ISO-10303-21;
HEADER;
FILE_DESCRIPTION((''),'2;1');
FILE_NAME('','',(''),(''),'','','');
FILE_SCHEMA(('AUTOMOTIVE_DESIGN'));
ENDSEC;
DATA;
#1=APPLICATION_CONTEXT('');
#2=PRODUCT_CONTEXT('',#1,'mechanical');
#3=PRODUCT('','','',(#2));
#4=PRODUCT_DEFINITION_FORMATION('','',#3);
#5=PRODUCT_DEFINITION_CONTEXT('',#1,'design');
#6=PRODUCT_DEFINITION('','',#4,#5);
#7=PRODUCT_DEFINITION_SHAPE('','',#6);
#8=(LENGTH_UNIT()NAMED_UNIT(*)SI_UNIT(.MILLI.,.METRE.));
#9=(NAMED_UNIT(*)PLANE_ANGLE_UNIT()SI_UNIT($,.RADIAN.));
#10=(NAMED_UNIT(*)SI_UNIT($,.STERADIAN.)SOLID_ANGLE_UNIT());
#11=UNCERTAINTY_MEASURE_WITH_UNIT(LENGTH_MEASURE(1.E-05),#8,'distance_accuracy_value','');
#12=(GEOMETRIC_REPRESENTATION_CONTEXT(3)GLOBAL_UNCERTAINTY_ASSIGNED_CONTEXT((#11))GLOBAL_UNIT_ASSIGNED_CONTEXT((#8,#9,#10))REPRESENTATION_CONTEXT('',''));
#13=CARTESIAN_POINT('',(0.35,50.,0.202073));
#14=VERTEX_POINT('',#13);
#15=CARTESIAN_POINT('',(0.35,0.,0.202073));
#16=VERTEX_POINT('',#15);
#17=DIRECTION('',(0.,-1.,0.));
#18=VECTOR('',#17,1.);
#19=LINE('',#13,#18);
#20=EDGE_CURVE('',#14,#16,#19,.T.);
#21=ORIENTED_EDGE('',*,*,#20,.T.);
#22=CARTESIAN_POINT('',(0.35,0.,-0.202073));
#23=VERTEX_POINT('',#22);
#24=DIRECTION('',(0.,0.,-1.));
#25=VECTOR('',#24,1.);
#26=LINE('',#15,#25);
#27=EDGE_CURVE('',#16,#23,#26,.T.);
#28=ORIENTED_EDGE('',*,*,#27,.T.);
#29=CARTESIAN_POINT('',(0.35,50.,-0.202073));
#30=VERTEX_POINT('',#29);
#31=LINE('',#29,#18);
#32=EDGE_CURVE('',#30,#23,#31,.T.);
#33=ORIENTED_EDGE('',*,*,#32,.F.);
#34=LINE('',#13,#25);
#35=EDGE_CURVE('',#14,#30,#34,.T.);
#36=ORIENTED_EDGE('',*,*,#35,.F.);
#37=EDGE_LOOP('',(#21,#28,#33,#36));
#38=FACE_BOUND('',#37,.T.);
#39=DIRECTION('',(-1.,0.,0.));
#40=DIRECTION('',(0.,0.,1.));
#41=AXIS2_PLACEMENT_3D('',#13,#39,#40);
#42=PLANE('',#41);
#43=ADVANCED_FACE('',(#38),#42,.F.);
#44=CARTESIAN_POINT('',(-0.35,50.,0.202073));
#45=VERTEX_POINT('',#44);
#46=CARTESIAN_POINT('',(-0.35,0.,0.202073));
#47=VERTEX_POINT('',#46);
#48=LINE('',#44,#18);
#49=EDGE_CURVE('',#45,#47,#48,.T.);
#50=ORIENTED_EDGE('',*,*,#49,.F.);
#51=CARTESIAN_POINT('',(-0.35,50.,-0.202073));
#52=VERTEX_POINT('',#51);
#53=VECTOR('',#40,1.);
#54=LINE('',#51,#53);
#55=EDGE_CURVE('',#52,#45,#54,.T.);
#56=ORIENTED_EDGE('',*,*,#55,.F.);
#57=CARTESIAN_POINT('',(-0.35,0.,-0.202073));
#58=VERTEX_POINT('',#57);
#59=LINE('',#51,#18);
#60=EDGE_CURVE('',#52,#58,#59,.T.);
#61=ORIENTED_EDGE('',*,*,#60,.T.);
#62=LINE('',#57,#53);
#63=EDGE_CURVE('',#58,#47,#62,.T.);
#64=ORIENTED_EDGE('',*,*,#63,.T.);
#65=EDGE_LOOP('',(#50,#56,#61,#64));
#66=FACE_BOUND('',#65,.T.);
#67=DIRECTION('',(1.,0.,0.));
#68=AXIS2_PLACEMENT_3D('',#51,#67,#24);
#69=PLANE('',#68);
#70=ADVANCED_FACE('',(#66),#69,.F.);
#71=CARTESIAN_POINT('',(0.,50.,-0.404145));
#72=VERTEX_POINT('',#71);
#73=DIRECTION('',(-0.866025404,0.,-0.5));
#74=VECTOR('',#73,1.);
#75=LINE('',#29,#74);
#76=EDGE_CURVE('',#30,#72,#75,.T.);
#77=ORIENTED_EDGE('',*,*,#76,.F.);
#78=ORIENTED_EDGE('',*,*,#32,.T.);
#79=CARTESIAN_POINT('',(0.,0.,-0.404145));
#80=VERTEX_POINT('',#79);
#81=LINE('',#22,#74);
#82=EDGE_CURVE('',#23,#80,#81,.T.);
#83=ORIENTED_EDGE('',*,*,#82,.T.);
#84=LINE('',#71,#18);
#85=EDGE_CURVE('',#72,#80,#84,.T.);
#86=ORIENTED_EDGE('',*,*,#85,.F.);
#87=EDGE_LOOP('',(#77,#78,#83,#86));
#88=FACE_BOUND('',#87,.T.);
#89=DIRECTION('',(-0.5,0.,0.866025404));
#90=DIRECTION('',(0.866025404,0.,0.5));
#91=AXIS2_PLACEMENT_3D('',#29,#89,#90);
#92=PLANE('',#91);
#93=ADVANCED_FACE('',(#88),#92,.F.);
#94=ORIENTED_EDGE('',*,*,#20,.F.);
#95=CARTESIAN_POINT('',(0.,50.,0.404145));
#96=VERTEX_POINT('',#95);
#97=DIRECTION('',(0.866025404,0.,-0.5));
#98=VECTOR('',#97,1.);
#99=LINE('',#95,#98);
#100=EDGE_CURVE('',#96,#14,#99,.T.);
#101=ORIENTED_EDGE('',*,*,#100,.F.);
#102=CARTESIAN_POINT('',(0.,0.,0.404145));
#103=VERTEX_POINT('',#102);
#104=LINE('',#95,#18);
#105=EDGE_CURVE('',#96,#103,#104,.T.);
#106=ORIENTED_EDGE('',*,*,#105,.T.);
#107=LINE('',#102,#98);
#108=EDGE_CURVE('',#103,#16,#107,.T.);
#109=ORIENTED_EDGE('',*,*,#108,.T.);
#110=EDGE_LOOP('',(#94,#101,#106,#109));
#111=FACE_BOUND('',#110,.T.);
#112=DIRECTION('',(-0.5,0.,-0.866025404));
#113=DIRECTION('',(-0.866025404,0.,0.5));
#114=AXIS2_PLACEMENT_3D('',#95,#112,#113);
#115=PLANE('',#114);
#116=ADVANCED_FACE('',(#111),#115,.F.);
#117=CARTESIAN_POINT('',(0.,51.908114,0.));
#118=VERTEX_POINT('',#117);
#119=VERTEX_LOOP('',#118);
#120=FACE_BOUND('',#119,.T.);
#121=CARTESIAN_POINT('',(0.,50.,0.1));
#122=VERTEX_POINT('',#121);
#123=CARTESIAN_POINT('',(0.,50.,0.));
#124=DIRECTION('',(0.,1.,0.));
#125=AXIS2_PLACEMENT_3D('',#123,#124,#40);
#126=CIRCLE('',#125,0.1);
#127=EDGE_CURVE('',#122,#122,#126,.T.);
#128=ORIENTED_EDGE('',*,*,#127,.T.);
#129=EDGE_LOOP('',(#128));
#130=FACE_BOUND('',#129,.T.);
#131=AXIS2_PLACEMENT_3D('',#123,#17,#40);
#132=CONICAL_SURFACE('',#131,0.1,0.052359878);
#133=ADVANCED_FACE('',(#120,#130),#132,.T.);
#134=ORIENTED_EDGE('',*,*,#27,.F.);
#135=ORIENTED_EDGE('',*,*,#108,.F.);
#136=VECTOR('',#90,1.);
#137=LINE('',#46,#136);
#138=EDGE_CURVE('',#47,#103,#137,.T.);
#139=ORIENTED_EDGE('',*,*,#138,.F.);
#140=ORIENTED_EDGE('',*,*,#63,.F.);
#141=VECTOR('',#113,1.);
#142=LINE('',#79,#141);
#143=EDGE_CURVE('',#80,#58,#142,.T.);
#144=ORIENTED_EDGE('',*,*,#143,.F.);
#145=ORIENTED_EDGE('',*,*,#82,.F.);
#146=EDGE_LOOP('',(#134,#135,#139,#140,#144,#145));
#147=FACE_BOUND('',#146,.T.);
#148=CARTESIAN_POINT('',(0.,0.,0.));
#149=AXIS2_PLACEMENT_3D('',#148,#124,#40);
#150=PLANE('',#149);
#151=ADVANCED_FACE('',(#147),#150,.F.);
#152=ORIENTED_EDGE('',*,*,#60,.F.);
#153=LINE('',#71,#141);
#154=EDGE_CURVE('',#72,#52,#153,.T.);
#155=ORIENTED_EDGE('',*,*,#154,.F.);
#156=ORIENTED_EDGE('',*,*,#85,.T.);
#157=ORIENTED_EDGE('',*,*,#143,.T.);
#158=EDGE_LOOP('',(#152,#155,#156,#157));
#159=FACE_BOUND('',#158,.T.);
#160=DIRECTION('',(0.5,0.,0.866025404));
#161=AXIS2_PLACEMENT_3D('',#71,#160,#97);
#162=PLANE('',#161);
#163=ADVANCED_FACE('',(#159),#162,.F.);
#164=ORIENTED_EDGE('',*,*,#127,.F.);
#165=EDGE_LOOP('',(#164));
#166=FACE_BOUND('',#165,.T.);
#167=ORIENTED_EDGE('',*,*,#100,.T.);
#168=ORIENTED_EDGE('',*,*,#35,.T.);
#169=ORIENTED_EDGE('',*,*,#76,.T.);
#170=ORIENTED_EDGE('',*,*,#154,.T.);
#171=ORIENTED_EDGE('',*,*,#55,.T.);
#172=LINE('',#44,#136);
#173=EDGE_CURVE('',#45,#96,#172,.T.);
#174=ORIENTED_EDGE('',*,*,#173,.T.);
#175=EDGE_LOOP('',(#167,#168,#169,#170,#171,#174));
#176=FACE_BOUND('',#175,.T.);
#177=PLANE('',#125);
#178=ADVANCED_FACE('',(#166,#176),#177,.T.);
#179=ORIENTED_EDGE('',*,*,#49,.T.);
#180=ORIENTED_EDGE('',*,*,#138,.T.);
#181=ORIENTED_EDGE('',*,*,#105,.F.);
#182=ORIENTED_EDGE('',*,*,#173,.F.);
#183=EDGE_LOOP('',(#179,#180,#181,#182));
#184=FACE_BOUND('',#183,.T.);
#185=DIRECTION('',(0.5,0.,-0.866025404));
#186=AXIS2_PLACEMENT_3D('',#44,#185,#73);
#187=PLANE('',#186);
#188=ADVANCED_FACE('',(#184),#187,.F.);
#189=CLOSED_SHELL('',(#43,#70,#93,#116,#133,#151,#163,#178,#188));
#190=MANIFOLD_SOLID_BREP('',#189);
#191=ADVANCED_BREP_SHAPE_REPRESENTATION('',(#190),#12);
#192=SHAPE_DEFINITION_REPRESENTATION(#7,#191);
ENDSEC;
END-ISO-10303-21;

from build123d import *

# Parameters (mm, degrees)
P_IDAT_VYSUNUT_M1_DEPTH = 50


# Read off the part's stored shape, not the designer's step: Přidat vysunutím5
with BuildPart() as part:
    # Skica2 → Přidat vysunutím1 (new body)
    with BuildSketch(Plane(origin=(0, 0, 0), x_dir=(1, 0, 0), z_dir=(0, 1, 0))):
        Polygon((0, 0.404145188), (-0.35, 0.202072594), (-0.35, -0.202072594), (0, -0.404145188), (0.35, -0.202072594), (0.35, 0.202072594), align=None)
    extrude(amount=P_IDAT_VYSUNUT_M1_DEPTH)

    # Přidat vysunutím5 outline → Přidat vysunutím5 (revolve)
    with BuildSketch(Plane.XY):
        Polygon((0.1, 50), (0, 51.908113669), (0, 50), align=None)
    revolve(axis=Axis((0, 0, 0), (0, 1, 0)))


solid = part.part
